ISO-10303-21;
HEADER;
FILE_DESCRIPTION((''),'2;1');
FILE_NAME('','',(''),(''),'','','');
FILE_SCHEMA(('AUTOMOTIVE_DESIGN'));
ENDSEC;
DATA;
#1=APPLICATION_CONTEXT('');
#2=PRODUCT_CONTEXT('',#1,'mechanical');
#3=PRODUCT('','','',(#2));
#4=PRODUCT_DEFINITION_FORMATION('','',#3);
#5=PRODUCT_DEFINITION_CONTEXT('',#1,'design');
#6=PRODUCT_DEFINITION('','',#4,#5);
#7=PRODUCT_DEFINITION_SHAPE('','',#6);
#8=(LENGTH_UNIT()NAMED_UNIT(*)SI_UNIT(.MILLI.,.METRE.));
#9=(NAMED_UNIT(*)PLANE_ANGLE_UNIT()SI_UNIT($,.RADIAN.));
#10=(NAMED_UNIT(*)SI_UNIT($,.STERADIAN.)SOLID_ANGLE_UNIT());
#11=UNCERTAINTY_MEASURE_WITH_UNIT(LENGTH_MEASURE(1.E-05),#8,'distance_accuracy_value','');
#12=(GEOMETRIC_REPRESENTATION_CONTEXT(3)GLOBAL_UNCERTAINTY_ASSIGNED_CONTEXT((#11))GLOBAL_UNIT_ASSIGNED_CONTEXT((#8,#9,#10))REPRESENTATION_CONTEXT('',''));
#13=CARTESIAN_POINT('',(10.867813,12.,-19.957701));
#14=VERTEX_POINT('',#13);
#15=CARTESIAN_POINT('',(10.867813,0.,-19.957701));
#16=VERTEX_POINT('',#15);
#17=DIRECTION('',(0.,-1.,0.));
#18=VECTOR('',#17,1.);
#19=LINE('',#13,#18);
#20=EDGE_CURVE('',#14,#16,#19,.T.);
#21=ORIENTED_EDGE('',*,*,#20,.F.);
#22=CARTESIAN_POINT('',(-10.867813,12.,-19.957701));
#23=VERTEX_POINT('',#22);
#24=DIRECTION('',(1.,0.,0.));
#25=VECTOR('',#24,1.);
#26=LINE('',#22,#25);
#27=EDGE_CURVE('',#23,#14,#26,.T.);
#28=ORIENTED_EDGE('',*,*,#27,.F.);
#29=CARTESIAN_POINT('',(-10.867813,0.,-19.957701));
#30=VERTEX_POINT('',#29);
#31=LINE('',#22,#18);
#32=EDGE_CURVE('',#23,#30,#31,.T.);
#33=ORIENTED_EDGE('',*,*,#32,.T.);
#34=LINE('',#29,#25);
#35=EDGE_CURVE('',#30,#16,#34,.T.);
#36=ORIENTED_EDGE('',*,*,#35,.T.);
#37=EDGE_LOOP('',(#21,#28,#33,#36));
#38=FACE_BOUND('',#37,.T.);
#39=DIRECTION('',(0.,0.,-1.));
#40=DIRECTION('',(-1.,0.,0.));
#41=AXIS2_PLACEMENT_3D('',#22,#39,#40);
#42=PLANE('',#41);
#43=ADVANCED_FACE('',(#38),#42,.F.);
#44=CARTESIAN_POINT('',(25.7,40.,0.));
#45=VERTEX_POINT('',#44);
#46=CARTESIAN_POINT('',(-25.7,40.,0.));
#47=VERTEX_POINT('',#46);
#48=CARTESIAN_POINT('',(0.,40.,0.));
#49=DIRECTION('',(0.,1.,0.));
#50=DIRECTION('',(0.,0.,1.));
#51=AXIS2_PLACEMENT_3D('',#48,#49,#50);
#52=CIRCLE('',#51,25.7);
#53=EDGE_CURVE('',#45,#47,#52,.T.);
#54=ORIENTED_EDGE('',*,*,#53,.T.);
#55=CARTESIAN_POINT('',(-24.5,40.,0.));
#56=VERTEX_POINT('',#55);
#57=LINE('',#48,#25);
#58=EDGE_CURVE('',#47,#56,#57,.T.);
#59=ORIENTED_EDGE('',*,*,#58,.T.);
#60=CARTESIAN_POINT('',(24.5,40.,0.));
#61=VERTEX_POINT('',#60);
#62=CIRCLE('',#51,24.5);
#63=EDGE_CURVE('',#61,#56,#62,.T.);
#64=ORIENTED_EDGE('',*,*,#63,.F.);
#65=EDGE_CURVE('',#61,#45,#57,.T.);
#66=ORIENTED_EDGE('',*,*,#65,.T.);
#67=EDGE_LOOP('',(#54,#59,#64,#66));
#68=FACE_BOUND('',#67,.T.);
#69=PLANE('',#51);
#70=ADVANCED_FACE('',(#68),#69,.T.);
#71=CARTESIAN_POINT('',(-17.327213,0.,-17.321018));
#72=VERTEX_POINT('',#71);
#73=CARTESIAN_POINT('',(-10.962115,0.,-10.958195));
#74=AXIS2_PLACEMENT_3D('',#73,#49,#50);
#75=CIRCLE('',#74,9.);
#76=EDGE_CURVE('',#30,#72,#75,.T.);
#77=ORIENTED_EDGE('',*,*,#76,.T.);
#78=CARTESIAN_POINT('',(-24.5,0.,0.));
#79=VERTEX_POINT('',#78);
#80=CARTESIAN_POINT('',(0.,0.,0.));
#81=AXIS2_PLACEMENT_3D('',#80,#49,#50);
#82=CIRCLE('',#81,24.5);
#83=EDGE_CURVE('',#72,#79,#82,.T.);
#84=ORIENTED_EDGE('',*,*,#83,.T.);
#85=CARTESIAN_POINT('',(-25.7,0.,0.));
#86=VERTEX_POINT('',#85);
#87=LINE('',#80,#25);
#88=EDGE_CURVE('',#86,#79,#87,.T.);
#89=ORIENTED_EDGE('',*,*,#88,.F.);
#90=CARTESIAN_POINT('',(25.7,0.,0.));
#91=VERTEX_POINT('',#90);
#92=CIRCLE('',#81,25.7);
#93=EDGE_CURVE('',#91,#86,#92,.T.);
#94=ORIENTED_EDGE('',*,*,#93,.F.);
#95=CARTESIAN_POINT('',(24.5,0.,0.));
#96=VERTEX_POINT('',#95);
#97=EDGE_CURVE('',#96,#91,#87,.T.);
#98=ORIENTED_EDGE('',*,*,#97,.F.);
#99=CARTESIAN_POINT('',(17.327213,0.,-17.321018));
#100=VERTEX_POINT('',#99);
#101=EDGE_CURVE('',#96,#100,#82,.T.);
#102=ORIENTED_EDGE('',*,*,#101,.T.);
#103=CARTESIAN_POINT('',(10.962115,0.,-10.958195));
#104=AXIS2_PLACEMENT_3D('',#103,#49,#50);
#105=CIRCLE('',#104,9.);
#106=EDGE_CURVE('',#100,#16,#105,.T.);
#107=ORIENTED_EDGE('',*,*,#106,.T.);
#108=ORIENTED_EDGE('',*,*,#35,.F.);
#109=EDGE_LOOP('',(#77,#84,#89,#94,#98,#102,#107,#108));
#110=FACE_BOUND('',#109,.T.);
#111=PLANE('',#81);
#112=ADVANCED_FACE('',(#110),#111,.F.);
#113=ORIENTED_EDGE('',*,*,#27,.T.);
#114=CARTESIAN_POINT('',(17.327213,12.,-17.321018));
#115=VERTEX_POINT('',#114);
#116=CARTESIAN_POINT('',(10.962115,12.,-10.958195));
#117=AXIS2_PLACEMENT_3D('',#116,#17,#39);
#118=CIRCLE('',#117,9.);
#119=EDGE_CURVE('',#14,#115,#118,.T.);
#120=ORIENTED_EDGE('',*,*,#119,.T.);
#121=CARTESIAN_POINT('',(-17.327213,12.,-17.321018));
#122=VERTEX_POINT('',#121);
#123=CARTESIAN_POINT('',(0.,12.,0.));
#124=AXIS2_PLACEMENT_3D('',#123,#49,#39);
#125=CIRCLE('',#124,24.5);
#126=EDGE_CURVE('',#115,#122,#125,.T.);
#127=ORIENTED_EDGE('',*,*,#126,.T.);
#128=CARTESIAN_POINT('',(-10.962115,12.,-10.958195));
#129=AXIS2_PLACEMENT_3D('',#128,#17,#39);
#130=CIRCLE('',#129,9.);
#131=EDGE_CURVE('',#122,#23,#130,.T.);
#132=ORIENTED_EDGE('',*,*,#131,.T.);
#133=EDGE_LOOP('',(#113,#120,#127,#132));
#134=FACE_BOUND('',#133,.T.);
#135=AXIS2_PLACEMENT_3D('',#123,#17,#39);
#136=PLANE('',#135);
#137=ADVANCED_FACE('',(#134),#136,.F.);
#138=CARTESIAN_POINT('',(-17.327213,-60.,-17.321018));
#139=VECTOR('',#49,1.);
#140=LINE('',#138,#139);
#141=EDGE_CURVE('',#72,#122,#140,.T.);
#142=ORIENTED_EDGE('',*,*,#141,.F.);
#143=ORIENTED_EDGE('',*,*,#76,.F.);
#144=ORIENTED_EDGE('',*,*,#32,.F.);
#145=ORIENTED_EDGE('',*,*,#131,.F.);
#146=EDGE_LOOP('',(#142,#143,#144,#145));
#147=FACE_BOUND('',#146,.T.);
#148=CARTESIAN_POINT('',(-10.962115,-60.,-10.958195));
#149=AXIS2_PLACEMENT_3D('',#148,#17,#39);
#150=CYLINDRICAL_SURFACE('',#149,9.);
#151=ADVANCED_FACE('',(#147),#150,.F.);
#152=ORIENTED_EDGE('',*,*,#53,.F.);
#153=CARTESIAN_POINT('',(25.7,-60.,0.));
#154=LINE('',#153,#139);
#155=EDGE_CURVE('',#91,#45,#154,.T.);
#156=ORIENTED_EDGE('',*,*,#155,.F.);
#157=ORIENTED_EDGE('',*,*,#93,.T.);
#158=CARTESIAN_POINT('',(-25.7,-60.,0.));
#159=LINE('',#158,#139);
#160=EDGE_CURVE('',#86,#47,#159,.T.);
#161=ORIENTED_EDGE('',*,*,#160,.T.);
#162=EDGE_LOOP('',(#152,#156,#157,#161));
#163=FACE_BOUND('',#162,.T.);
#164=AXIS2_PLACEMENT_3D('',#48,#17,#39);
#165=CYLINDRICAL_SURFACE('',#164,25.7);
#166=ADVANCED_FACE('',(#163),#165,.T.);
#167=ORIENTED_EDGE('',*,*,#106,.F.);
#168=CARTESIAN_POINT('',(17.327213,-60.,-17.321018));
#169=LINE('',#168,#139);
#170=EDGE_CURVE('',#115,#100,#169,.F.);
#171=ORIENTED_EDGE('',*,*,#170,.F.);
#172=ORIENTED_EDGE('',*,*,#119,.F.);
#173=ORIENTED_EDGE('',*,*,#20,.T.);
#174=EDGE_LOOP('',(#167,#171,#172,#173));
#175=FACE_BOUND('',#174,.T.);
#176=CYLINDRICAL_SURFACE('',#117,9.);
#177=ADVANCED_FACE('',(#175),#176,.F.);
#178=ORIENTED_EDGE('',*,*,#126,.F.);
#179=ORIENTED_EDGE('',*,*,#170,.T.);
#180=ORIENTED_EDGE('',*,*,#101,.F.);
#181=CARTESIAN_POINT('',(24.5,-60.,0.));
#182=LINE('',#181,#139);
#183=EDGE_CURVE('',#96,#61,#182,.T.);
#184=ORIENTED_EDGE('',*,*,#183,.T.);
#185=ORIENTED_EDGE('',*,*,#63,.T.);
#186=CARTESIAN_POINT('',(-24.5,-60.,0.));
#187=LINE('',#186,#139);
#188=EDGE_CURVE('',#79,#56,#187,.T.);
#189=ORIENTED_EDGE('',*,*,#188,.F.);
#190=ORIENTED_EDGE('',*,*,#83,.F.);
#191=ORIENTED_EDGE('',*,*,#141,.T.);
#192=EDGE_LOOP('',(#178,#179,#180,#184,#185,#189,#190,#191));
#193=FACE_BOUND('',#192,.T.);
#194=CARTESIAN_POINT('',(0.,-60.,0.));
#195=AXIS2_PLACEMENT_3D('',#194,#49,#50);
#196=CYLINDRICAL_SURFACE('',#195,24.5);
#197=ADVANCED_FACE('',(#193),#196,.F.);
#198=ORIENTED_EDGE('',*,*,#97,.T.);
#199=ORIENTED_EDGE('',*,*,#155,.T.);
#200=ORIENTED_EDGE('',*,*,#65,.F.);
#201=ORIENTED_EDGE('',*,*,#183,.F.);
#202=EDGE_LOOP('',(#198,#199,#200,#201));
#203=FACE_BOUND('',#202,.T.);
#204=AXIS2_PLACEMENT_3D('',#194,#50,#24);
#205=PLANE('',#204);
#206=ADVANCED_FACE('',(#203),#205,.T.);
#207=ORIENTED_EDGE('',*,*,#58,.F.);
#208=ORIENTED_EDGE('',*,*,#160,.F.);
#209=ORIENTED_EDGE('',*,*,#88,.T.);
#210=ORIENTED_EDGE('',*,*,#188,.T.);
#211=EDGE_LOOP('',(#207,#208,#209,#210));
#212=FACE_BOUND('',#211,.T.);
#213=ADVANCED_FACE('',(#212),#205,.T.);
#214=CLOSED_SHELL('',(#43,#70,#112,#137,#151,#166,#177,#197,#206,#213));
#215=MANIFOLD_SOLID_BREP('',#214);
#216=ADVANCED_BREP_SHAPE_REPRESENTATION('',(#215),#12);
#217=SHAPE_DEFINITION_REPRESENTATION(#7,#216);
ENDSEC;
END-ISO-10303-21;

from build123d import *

# Parameters (mm, degrees)
SKETCH1_R           = 25.7
MAIN_CYLINDER_DEPTH = 40
SKETCH4_R           = 24.5
MAIN_CUT_DOWN_DEPTH = 100
BOSS_EXTRUDE1_START = 12
BOSS_EXTRUDE1_DEPTH = 12
FILLET1_DEPTH       = 12


with BuildPart() as part:
    # Sketch1 → Main Cylinder (new body)
    with BuildSketch(Plane(origin=(0, 0, 0), x_dir=(1, 0, 0), z_dir=(0, 1, 0))):
        with Locations(Location((0, 0, 0), (0, 0, 270))):
            Circle(SKETCH1_R)
    extrude(amount=MAIN_CYLINDER_DEPTH)

    # Sketch4 → Main cut down (cut)
    with BuildSketch(Plane(origin=(0, 40, 0), x_dir=(1, 0, 0), z_dir=(0, 1, 0))):
        Circle(SKETCH4_R)
        Polygon((0, 0), (25.7, 0), (25.7, -40.6), (-25.7, -40.6), (-25.7, 0), align=None)
    extrude(amount=-MAIN_CUT_DOWN_DEPTH, mode=Mode.SUBTRACT)

    # Sketch5 → Boss-Extrude1 (add)
    with BuildSketch(Plane(origin=(0, 0, 0), x_dir=(1, 0, 0), z_dir=(0, 1, 0)).offset(BOSS_EXTRUDE1_START)):
        with BuildLine():
            Line((-10.867812951, 19.957701193), (10.867812951, 19.957701193))
            Line((10.867812951, 19.957701193), (10.867812951, 21.957701193))
            ThreePointArc((10.867812951, 21.957701193), (0, 24.5), (-10.867812951, 21.957701193))
            Line((-10.867812951, 21.957701193), (-10.867812951, 19.957701193))
        make_face()
    extrude(amount=-BOSS_EXTRUDE1_DEPTH)

    # Fillet1: read off the stored shape, not the designer's step
    # Fillet1 outline → Fillet1 (add)
    with BuildSketch(Plane(origin=(0, 0, 0), x_dir=(1, 0, 0), z_dir=(0, 1, 0))):
        with BuildLine():
            Line((10.867812951, 21.957701193), (10.867812951, 19.957701193))
            ThreePointArc((10.867812951, 19.957701193), (14.363400898, 19.290736978), (17.327213424, 17.3210183))
            ThreePointArc((17.327213424, 17.3210183), (14.286867576, 19.903150878), (10.867812951, 21.957701193))
        make_face()
        with BuildLine():
            Line((-10.867812951, 19.957701193), (-10.867812951, 21.957701193))
            ThreePointArc((-10.867812951, 21.957701193), (-14.286867576, 19.903150878), (-17.327213424, 17.3210183))
            ThreePointArc((-17.327213424, 17.3210183), (-14.363400898, 19.290736978), (-10.867812951, 19.957701193))
        make_face()
    extrude(amount=FILLET1_DEPTH)


solid = part.part
